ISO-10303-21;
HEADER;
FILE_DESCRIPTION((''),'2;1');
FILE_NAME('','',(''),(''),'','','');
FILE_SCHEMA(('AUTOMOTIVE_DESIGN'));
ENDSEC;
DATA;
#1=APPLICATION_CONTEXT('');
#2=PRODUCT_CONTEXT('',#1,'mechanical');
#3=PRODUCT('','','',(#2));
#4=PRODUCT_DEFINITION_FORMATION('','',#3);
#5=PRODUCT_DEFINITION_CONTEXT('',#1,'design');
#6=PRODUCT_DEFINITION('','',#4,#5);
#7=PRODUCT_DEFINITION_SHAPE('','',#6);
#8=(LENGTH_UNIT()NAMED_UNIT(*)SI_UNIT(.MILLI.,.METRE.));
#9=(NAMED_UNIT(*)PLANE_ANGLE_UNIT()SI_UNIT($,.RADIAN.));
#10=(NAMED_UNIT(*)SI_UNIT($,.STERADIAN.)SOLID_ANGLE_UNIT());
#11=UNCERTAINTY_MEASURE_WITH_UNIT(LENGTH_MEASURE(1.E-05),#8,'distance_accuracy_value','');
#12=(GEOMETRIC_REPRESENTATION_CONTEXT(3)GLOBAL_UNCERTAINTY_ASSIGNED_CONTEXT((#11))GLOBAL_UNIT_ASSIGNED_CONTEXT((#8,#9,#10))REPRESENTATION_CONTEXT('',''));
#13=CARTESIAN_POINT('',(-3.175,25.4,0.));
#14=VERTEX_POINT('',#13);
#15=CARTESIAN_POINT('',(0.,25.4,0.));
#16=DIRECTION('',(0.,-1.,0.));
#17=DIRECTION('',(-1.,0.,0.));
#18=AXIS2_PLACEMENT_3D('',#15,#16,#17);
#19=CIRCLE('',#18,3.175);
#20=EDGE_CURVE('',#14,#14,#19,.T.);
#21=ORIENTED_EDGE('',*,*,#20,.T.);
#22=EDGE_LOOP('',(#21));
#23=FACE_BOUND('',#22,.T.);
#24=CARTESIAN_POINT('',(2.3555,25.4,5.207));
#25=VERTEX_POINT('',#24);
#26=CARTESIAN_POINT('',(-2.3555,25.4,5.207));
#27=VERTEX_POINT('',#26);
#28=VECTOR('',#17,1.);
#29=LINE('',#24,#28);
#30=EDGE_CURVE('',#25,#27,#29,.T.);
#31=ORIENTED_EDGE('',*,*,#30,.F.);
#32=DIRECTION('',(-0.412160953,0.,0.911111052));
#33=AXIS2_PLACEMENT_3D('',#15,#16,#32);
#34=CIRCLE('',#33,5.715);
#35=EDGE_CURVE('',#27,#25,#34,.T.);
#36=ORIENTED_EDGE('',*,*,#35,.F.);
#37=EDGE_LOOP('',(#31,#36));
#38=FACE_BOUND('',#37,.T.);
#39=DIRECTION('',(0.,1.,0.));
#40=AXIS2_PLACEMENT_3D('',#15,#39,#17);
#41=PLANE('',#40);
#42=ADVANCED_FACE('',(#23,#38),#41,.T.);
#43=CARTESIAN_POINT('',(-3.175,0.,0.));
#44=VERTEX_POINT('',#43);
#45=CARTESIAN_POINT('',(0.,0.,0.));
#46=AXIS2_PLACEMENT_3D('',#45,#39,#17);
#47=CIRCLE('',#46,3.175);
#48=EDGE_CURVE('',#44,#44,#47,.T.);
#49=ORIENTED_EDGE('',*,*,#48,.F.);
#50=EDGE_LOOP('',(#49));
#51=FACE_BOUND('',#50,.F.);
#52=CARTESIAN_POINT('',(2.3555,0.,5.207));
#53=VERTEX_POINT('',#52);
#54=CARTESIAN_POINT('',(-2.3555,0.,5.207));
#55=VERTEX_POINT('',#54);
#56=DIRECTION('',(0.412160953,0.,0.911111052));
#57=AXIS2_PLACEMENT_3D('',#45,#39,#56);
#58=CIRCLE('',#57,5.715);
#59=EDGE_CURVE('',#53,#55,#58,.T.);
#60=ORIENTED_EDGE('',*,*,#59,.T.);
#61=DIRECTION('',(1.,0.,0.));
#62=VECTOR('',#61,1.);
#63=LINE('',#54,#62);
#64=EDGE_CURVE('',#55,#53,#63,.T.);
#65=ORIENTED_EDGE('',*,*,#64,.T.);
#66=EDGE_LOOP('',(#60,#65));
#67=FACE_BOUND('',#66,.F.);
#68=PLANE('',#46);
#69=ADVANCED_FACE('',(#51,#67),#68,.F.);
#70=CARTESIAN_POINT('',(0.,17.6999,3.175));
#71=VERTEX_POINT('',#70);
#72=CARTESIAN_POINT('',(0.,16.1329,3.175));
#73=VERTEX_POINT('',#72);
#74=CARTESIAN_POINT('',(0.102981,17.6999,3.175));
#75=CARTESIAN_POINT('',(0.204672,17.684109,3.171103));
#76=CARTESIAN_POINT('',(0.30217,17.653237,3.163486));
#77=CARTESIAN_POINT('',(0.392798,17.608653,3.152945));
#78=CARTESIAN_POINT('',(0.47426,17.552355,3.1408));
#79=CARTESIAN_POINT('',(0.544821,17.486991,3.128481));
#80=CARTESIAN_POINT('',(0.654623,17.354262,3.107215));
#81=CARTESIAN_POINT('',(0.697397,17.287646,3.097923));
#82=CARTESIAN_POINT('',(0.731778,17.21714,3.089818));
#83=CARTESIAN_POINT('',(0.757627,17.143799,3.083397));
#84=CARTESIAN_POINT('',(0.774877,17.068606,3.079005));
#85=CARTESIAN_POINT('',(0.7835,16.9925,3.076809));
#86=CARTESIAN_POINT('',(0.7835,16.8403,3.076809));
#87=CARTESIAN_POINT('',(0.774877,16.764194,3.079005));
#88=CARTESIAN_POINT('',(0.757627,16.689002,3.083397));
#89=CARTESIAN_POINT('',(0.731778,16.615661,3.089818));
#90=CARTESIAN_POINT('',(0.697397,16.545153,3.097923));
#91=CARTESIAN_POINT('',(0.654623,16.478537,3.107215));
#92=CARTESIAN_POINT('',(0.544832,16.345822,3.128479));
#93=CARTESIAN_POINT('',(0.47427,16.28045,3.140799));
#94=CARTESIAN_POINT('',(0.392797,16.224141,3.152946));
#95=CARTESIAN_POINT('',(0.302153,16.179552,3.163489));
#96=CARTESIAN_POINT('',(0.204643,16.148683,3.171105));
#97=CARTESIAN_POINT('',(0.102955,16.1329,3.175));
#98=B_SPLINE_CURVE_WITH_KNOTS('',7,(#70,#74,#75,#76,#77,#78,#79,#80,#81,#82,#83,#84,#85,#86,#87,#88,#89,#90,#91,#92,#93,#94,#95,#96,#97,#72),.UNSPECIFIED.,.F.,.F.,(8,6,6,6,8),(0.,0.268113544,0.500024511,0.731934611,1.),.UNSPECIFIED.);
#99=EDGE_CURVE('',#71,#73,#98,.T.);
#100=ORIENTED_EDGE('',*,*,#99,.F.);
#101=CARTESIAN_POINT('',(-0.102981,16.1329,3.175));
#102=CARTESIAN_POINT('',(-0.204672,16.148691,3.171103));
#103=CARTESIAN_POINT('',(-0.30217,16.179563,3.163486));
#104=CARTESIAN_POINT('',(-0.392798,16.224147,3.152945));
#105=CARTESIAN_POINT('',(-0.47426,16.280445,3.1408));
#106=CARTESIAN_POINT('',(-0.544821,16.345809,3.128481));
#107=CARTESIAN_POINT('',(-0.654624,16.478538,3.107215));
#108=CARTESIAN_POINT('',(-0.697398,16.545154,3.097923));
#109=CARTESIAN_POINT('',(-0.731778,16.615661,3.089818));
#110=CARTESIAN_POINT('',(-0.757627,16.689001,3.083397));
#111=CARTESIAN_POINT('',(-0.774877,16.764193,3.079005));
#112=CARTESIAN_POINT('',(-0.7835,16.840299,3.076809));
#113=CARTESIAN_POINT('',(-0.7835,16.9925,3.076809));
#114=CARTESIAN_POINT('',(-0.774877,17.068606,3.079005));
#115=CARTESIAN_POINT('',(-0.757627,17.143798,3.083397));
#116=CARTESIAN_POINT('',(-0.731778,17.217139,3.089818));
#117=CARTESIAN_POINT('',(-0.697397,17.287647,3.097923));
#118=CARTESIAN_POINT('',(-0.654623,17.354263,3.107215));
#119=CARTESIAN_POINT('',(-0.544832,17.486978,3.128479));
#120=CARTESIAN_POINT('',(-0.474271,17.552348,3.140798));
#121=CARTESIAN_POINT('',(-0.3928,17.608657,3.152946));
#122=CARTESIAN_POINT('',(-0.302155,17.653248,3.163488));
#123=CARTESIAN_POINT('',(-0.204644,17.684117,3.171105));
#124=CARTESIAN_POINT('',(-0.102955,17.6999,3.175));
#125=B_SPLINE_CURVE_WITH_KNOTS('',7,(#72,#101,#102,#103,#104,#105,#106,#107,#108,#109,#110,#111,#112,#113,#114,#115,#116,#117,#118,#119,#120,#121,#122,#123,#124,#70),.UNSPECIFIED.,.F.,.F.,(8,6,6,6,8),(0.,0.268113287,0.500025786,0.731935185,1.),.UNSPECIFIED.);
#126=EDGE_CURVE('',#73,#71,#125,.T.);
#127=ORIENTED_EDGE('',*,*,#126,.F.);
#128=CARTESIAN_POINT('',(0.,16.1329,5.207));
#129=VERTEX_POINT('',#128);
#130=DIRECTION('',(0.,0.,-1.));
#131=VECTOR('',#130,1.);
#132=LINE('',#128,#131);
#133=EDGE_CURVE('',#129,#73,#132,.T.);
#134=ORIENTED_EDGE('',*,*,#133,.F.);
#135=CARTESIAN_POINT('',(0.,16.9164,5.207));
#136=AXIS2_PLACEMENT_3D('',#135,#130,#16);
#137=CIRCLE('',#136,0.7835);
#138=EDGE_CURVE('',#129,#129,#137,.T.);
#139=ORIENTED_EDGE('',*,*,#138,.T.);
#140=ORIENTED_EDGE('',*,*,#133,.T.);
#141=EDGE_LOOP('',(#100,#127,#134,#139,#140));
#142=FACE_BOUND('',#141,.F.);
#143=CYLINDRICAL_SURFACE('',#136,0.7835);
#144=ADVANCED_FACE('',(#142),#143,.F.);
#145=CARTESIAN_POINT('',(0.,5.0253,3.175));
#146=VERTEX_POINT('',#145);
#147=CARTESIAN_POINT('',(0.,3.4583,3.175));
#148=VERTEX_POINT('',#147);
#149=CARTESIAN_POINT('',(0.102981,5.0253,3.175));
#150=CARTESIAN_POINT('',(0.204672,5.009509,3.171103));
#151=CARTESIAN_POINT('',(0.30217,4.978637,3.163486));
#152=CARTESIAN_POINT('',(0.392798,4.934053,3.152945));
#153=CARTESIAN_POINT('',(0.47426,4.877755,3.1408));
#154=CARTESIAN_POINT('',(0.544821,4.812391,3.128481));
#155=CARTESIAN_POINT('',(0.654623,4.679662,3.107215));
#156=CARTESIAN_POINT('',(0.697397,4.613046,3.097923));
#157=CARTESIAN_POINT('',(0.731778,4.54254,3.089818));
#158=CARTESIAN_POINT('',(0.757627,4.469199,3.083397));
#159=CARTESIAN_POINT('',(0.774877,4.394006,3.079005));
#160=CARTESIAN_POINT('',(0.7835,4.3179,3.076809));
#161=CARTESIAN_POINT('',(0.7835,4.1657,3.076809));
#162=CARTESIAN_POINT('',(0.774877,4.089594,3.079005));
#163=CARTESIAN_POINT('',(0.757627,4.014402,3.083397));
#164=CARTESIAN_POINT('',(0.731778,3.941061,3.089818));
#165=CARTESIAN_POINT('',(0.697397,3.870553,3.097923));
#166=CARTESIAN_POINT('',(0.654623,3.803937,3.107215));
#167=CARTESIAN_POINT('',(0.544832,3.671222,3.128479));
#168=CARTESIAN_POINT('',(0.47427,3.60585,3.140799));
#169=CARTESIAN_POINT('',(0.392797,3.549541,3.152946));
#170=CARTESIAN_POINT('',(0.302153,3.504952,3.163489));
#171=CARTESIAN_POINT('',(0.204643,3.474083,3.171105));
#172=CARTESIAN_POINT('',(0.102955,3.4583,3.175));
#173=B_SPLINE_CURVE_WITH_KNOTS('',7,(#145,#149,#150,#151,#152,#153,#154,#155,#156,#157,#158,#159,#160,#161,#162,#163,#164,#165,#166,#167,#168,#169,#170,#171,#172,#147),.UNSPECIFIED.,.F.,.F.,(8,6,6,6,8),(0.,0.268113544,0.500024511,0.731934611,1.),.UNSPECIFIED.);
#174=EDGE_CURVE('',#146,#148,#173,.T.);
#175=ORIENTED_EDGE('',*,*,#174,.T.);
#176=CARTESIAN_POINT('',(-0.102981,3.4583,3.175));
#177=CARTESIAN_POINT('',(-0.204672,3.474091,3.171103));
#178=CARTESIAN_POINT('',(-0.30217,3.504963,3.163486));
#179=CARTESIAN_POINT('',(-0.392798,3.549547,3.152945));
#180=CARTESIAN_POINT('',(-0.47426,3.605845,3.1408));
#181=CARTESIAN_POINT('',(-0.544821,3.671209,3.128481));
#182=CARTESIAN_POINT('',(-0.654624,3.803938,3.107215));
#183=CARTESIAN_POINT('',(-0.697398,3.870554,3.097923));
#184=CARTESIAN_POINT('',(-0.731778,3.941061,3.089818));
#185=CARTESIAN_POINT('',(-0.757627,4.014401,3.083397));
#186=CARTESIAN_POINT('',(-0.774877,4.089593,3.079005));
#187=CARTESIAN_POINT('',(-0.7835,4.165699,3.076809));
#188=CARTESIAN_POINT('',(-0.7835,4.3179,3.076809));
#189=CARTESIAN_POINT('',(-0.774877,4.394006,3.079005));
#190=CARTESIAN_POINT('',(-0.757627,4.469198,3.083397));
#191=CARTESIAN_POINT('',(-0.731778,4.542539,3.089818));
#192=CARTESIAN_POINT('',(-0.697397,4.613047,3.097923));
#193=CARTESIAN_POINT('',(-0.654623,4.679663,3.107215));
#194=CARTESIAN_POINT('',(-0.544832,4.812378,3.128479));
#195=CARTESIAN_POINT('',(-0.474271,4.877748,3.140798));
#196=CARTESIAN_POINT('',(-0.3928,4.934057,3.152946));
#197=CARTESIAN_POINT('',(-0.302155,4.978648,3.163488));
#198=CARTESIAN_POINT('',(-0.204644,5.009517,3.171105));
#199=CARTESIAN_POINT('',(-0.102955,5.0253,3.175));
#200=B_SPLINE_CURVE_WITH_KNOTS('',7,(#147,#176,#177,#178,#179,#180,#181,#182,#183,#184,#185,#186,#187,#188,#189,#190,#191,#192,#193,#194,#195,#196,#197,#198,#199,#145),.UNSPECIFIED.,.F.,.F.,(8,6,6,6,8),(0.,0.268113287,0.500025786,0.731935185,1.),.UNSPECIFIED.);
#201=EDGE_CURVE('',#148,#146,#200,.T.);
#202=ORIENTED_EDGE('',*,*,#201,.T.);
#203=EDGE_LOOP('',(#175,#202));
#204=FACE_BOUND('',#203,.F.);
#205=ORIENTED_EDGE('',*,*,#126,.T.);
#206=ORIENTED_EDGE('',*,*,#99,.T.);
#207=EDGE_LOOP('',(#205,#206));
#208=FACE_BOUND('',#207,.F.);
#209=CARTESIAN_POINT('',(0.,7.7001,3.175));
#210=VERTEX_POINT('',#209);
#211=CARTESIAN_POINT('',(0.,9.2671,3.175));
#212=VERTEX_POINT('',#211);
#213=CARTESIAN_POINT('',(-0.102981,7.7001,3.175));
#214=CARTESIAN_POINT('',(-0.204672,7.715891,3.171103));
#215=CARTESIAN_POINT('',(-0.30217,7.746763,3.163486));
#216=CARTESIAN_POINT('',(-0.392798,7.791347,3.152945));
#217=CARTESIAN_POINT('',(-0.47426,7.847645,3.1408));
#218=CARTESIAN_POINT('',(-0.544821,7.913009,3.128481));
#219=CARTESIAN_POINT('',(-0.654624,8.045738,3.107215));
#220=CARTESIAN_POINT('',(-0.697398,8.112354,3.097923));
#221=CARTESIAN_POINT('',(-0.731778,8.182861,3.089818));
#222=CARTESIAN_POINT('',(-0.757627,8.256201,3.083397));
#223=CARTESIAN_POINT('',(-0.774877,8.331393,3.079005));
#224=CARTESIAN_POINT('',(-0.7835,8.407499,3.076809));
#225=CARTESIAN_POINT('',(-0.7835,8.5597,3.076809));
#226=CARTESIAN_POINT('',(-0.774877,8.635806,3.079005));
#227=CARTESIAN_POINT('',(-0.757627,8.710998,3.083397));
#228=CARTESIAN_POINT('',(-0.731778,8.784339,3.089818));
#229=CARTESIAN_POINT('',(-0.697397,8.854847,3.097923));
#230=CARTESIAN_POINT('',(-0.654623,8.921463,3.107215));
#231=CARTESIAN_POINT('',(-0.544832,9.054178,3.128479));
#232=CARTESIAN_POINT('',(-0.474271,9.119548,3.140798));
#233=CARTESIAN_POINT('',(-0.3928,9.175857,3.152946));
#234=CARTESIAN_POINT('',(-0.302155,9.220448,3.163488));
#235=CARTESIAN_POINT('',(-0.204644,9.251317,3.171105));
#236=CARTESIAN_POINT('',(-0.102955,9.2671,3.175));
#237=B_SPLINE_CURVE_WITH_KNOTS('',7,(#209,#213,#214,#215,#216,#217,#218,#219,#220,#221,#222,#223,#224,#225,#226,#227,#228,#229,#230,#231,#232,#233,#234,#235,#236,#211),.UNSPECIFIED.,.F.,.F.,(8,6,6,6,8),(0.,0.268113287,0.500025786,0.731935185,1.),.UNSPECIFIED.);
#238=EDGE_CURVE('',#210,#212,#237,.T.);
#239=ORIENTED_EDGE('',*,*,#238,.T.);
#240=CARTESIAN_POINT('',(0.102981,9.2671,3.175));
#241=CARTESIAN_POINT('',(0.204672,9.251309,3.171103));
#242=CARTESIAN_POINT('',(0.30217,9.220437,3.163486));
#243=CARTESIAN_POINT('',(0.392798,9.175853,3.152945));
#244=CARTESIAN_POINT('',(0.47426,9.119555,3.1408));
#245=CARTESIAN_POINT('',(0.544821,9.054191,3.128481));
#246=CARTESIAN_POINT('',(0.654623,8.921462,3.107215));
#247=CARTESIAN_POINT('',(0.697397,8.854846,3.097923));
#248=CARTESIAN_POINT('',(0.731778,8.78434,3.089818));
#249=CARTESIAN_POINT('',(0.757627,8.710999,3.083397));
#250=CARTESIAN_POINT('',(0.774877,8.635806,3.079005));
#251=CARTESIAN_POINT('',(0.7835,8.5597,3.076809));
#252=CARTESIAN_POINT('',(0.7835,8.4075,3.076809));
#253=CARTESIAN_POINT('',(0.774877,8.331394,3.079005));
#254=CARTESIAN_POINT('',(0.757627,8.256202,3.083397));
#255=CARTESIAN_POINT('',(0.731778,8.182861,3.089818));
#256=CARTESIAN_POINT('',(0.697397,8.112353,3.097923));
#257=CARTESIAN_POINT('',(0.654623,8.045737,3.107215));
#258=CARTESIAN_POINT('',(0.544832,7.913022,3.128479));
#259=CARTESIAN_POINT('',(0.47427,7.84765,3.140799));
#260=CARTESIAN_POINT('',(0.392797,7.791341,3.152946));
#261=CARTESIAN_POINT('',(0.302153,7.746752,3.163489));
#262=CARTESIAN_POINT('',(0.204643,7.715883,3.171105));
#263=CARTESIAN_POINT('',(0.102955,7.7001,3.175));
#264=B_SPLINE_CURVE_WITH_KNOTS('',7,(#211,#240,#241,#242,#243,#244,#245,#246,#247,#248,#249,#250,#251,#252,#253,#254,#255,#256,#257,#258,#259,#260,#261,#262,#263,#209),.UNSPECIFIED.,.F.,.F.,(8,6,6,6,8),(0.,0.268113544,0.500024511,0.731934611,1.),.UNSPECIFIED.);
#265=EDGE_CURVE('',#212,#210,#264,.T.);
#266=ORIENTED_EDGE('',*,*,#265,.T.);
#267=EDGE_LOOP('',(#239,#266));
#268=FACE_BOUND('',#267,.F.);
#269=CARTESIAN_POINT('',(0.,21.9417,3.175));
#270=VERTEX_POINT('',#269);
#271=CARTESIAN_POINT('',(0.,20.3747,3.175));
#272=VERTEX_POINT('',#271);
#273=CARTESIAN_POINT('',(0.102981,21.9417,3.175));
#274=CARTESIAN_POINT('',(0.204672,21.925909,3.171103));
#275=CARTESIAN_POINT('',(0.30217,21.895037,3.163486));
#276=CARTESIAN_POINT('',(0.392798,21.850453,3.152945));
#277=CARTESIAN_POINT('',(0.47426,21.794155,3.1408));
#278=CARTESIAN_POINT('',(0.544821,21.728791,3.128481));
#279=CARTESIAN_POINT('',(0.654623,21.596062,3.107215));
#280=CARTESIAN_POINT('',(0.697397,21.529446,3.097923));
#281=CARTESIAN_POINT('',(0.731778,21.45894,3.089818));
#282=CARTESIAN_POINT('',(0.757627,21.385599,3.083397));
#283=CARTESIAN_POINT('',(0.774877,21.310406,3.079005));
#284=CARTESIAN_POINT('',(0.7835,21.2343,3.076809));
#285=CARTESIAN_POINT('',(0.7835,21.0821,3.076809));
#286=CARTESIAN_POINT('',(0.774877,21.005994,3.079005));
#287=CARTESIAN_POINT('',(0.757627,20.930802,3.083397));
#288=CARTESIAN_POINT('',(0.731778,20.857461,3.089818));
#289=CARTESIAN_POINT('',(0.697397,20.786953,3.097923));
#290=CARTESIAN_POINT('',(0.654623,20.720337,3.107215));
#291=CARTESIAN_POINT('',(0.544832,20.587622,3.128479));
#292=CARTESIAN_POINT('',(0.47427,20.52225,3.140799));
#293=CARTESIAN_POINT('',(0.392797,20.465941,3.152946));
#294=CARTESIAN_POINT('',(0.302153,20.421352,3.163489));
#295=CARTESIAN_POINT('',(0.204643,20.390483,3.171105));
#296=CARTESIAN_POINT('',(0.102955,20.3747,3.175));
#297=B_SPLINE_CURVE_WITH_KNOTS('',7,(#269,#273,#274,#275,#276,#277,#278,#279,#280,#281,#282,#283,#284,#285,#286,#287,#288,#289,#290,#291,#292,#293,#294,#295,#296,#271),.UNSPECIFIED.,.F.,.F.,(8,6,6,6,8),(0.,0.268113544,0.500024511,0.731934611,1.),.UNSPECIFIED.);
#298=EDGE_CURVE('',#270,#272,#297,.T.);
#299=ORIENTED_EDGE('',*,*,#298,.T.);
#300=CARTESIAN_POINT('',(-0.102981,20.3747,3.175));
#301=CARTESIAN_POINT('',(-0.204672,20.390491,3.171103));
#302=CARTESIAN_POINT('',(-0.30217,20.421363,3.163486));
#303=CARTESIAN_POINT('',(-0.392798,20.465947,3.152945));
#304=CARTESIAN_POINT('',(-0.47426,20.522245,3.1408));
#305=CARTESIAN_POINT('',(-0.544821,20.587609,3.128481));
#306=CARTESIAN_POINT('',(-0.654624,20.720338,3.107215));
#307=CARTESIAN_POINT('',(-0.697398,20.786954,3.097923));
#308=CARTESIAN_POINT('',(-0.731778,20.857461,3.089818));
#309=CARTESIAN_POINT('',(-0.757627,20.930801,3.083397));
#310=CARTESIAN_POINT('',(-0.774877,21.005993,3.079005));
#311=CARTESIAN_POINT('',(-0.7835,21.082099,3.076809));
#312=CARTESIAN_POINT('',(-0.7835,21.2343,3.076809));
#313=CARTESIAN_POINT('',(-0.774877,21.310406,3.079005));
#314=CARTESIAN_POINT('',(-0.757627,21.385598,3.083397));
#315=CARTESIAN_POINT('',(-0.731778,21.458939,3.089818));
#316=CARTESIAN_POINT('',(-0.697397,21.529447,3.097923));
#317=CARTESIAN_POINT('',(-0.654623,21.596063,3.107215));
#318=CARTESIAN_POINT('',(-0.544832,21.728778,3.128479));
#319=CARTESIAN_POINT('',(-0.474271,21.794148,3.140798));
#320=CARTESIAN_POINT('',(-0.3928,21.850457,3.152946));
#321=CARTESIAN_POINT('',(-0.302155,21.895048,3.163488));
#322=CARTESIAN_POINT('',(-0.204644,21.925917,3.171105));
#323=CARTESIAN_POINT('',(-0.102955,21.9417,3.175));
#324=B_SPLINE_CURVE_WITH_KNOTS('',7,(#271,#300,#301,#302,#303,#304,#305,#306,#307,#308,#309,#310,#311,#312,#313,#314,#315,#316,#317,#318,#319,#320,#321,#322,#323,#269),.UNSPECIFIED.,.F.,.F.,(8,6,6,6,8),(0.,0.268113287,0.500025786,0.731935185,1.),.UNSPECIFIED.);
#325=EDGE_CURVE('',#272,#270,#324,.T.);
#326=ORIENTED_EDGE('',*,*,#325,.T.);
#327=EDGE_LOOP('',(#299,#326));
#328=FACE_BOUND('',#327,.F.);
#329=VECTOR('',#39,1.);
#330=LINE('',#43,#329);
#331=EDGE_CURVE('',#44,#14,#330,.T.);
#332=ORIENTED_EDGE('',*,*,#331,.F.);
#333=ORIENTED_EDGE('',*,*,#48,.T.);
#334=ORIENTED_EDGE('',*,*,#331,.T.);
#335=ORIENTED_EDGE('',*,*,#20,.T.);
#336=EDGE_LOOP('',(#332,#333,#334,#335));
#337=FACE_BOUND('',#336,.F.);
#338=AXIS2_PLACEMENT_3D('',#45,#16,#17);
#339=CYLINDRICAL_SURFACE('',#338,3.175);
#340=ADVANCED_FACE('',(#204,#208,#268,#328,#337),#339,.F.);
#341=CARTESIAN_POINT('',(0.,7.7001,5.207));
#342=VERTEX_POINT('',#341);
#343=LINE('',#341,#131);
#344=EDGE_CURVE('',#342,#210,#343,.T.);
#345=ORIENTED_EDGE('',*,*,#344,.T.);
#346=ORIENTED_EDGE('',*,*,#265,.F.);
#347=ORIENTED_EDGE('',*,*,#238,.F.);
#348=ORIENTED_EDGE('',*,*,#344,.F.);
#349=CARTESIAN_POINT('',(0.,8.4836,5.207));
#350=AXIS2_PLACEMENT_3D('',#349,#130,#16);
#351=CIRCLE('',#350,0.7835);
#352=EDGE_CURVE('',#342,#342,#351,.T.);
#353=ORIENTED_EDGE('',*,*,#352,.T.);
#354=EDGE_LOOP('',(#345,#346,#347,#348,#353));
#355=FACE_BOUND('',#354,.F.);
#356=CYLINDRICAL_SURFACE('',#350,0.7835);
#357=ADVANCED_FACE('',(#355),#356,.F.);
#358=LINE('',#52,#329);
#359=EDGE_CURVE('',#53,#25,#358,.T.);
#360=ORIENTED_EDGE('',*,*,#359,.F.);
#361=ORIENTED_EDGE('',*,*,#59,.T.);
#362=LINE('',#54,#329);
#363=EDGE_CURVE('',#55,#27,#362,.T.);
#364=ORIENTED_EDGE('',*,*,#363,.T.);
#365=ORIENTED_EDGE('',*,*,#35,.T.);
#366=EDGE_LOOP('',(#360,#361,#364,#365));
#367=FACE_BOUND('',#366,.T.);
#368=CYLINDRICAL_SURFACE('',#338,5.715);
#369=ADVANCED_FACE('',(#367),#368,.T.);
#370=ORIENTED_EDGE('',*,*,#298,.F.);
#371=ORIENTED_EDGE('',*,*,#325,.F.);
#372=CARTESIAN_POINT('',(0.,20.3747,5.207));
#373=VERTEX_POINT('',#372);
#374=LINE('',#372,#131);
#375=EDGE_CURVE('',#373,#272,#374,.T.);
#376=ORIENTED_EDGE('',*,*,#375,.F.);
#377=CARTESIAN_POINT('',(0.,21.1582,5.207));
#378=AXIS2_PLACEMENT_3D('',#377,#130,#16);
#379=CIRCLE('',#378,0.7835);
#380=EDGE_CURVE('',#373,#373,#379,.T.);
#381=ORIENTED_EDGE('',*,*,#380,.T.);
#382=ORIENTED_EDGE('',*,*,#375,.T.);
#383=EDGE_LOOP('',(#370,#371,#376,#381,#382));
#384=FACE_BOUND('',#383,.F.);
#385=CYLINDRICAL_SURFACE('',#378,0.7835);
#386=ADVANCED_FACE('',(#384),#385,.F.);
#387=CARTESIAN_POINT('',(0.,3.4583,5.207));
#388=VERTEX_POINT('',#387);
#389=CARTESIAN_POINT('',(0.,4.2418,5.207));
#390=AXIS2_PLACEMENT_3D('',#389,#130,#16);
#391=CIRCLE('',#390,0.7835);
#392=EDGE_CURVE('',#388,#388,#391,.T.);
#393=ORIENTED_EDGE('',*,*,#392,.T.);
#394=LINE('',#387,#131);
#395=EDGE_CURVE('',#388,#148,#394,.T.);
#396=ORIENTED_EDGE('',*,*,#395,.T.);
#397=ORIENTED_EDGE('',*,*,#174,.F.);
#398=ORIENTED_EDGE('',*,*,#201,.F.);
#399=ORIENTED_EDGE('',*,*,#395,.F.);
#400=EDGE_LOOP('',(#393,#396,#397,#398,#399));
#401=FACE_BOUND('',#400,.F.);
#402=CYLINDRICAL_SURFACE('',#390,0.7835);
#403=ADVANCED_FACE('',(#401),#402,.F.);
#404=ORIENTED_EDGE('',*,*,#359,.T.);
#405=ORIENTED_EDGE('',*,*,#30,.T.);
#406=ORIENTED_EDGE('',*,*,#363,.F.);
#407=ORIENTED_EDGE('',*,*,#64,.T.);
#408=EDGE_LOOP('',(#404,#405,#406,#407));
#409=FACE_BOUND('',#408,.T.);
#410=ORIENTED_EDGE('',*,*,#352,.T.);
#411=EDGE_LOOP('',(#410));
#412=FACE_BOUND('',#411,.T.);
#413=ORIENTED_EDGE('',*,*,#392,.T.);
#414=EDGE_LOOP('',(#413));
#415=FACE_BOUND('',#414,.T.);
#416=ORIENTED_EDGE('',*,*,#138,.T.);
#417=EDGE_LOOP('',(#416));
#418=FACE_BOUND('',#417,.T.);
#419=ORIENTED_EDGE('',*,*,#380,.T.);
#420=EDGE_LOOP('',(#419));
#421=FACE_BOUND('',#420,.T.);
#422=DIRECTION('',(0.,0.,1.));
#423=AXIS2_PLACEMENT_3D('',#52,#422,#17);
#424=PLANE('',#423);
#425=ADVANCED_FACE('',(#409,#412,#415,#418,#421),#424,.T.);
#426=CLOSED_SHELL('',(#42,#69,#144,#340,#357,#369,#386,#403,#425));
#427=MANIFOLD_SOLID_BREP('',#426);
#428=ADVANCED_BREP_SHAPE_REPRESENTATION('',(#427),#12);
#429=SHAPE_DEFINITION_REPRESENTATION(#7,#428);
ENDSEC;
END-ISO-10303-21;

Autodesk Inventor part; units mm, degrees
ref_plane "YZ Plane" through (0, 0, 0) normal (1, 0, 0) x (0, 1, 0)
ref_plane "XZ Plane" through (0, 0, 0) normal (0, 1, 0) x (-1, 0, 0)
ref_plane "XY Plane" through (0, 0, 0) normal (0, 0, 1) x (1, 0, 0)
sketch "Sketch10" plane through (0, 0, 0) normal (0, 1, 0) x (-1, 0, 0)
  circle A0 centre (0, 0) radius 3.175
  circle A1 centre (0, 0) radius 5.715
  line L0 (0, 3.175) -> (0, 5.207)
  line L1 (0, 5.207) -> (2.3555, 5.207)
  line L2 (-2.3555, 5.207) -> (0, 5.207)
  dimension "d61" = 6.35
  dimension "d62" = 11.43
  dimension "d63" = 2.032
extrude "Extrusion7" add sketch "Sketch10" along normal blind 25.4 contours A1 L2 L1 picked at (-1.045, 4.4973)
sketch "Sketch12" plane through (-2.3555, 0, 5.207) normal (0, 0, 1) x (1, 0, 0)
  line L0 (2.3555, 0) -> (2.3555, 4.2418)
  line L1 (2.3555, 4.2418) -> (2.3555, 8.4836)
  line L2 (8.0705, 25.4) -> (-3.3595, 25.4) projected
  line L3 (2.3555, 25.4) -> (2.3555, 21.1582)
  line L4 (2.3555, 21.1582) -> (2.3555, 16.9164)
  point P0 (4.711, 25.4)
  point P1 (0, 25.4)
  dimension "d66" = 4.2418
  dimension "d67" = 4.2418
  dimension "d68" = 4.2418
  dimension "d69" = 4.2418
hole "Hole5" at (0, 21.1582, 5.207) at (0, 16.9164, 5.207) at (0, 8.4836, 5.207) at (0, 4.2418, 5.207) direction (0, 0, -1) diameter 1.567 depth 6.2992 thread size "M2x0.4" class "6H" standard "ISO Metric profile"
properties part number "rotaryconnector"
